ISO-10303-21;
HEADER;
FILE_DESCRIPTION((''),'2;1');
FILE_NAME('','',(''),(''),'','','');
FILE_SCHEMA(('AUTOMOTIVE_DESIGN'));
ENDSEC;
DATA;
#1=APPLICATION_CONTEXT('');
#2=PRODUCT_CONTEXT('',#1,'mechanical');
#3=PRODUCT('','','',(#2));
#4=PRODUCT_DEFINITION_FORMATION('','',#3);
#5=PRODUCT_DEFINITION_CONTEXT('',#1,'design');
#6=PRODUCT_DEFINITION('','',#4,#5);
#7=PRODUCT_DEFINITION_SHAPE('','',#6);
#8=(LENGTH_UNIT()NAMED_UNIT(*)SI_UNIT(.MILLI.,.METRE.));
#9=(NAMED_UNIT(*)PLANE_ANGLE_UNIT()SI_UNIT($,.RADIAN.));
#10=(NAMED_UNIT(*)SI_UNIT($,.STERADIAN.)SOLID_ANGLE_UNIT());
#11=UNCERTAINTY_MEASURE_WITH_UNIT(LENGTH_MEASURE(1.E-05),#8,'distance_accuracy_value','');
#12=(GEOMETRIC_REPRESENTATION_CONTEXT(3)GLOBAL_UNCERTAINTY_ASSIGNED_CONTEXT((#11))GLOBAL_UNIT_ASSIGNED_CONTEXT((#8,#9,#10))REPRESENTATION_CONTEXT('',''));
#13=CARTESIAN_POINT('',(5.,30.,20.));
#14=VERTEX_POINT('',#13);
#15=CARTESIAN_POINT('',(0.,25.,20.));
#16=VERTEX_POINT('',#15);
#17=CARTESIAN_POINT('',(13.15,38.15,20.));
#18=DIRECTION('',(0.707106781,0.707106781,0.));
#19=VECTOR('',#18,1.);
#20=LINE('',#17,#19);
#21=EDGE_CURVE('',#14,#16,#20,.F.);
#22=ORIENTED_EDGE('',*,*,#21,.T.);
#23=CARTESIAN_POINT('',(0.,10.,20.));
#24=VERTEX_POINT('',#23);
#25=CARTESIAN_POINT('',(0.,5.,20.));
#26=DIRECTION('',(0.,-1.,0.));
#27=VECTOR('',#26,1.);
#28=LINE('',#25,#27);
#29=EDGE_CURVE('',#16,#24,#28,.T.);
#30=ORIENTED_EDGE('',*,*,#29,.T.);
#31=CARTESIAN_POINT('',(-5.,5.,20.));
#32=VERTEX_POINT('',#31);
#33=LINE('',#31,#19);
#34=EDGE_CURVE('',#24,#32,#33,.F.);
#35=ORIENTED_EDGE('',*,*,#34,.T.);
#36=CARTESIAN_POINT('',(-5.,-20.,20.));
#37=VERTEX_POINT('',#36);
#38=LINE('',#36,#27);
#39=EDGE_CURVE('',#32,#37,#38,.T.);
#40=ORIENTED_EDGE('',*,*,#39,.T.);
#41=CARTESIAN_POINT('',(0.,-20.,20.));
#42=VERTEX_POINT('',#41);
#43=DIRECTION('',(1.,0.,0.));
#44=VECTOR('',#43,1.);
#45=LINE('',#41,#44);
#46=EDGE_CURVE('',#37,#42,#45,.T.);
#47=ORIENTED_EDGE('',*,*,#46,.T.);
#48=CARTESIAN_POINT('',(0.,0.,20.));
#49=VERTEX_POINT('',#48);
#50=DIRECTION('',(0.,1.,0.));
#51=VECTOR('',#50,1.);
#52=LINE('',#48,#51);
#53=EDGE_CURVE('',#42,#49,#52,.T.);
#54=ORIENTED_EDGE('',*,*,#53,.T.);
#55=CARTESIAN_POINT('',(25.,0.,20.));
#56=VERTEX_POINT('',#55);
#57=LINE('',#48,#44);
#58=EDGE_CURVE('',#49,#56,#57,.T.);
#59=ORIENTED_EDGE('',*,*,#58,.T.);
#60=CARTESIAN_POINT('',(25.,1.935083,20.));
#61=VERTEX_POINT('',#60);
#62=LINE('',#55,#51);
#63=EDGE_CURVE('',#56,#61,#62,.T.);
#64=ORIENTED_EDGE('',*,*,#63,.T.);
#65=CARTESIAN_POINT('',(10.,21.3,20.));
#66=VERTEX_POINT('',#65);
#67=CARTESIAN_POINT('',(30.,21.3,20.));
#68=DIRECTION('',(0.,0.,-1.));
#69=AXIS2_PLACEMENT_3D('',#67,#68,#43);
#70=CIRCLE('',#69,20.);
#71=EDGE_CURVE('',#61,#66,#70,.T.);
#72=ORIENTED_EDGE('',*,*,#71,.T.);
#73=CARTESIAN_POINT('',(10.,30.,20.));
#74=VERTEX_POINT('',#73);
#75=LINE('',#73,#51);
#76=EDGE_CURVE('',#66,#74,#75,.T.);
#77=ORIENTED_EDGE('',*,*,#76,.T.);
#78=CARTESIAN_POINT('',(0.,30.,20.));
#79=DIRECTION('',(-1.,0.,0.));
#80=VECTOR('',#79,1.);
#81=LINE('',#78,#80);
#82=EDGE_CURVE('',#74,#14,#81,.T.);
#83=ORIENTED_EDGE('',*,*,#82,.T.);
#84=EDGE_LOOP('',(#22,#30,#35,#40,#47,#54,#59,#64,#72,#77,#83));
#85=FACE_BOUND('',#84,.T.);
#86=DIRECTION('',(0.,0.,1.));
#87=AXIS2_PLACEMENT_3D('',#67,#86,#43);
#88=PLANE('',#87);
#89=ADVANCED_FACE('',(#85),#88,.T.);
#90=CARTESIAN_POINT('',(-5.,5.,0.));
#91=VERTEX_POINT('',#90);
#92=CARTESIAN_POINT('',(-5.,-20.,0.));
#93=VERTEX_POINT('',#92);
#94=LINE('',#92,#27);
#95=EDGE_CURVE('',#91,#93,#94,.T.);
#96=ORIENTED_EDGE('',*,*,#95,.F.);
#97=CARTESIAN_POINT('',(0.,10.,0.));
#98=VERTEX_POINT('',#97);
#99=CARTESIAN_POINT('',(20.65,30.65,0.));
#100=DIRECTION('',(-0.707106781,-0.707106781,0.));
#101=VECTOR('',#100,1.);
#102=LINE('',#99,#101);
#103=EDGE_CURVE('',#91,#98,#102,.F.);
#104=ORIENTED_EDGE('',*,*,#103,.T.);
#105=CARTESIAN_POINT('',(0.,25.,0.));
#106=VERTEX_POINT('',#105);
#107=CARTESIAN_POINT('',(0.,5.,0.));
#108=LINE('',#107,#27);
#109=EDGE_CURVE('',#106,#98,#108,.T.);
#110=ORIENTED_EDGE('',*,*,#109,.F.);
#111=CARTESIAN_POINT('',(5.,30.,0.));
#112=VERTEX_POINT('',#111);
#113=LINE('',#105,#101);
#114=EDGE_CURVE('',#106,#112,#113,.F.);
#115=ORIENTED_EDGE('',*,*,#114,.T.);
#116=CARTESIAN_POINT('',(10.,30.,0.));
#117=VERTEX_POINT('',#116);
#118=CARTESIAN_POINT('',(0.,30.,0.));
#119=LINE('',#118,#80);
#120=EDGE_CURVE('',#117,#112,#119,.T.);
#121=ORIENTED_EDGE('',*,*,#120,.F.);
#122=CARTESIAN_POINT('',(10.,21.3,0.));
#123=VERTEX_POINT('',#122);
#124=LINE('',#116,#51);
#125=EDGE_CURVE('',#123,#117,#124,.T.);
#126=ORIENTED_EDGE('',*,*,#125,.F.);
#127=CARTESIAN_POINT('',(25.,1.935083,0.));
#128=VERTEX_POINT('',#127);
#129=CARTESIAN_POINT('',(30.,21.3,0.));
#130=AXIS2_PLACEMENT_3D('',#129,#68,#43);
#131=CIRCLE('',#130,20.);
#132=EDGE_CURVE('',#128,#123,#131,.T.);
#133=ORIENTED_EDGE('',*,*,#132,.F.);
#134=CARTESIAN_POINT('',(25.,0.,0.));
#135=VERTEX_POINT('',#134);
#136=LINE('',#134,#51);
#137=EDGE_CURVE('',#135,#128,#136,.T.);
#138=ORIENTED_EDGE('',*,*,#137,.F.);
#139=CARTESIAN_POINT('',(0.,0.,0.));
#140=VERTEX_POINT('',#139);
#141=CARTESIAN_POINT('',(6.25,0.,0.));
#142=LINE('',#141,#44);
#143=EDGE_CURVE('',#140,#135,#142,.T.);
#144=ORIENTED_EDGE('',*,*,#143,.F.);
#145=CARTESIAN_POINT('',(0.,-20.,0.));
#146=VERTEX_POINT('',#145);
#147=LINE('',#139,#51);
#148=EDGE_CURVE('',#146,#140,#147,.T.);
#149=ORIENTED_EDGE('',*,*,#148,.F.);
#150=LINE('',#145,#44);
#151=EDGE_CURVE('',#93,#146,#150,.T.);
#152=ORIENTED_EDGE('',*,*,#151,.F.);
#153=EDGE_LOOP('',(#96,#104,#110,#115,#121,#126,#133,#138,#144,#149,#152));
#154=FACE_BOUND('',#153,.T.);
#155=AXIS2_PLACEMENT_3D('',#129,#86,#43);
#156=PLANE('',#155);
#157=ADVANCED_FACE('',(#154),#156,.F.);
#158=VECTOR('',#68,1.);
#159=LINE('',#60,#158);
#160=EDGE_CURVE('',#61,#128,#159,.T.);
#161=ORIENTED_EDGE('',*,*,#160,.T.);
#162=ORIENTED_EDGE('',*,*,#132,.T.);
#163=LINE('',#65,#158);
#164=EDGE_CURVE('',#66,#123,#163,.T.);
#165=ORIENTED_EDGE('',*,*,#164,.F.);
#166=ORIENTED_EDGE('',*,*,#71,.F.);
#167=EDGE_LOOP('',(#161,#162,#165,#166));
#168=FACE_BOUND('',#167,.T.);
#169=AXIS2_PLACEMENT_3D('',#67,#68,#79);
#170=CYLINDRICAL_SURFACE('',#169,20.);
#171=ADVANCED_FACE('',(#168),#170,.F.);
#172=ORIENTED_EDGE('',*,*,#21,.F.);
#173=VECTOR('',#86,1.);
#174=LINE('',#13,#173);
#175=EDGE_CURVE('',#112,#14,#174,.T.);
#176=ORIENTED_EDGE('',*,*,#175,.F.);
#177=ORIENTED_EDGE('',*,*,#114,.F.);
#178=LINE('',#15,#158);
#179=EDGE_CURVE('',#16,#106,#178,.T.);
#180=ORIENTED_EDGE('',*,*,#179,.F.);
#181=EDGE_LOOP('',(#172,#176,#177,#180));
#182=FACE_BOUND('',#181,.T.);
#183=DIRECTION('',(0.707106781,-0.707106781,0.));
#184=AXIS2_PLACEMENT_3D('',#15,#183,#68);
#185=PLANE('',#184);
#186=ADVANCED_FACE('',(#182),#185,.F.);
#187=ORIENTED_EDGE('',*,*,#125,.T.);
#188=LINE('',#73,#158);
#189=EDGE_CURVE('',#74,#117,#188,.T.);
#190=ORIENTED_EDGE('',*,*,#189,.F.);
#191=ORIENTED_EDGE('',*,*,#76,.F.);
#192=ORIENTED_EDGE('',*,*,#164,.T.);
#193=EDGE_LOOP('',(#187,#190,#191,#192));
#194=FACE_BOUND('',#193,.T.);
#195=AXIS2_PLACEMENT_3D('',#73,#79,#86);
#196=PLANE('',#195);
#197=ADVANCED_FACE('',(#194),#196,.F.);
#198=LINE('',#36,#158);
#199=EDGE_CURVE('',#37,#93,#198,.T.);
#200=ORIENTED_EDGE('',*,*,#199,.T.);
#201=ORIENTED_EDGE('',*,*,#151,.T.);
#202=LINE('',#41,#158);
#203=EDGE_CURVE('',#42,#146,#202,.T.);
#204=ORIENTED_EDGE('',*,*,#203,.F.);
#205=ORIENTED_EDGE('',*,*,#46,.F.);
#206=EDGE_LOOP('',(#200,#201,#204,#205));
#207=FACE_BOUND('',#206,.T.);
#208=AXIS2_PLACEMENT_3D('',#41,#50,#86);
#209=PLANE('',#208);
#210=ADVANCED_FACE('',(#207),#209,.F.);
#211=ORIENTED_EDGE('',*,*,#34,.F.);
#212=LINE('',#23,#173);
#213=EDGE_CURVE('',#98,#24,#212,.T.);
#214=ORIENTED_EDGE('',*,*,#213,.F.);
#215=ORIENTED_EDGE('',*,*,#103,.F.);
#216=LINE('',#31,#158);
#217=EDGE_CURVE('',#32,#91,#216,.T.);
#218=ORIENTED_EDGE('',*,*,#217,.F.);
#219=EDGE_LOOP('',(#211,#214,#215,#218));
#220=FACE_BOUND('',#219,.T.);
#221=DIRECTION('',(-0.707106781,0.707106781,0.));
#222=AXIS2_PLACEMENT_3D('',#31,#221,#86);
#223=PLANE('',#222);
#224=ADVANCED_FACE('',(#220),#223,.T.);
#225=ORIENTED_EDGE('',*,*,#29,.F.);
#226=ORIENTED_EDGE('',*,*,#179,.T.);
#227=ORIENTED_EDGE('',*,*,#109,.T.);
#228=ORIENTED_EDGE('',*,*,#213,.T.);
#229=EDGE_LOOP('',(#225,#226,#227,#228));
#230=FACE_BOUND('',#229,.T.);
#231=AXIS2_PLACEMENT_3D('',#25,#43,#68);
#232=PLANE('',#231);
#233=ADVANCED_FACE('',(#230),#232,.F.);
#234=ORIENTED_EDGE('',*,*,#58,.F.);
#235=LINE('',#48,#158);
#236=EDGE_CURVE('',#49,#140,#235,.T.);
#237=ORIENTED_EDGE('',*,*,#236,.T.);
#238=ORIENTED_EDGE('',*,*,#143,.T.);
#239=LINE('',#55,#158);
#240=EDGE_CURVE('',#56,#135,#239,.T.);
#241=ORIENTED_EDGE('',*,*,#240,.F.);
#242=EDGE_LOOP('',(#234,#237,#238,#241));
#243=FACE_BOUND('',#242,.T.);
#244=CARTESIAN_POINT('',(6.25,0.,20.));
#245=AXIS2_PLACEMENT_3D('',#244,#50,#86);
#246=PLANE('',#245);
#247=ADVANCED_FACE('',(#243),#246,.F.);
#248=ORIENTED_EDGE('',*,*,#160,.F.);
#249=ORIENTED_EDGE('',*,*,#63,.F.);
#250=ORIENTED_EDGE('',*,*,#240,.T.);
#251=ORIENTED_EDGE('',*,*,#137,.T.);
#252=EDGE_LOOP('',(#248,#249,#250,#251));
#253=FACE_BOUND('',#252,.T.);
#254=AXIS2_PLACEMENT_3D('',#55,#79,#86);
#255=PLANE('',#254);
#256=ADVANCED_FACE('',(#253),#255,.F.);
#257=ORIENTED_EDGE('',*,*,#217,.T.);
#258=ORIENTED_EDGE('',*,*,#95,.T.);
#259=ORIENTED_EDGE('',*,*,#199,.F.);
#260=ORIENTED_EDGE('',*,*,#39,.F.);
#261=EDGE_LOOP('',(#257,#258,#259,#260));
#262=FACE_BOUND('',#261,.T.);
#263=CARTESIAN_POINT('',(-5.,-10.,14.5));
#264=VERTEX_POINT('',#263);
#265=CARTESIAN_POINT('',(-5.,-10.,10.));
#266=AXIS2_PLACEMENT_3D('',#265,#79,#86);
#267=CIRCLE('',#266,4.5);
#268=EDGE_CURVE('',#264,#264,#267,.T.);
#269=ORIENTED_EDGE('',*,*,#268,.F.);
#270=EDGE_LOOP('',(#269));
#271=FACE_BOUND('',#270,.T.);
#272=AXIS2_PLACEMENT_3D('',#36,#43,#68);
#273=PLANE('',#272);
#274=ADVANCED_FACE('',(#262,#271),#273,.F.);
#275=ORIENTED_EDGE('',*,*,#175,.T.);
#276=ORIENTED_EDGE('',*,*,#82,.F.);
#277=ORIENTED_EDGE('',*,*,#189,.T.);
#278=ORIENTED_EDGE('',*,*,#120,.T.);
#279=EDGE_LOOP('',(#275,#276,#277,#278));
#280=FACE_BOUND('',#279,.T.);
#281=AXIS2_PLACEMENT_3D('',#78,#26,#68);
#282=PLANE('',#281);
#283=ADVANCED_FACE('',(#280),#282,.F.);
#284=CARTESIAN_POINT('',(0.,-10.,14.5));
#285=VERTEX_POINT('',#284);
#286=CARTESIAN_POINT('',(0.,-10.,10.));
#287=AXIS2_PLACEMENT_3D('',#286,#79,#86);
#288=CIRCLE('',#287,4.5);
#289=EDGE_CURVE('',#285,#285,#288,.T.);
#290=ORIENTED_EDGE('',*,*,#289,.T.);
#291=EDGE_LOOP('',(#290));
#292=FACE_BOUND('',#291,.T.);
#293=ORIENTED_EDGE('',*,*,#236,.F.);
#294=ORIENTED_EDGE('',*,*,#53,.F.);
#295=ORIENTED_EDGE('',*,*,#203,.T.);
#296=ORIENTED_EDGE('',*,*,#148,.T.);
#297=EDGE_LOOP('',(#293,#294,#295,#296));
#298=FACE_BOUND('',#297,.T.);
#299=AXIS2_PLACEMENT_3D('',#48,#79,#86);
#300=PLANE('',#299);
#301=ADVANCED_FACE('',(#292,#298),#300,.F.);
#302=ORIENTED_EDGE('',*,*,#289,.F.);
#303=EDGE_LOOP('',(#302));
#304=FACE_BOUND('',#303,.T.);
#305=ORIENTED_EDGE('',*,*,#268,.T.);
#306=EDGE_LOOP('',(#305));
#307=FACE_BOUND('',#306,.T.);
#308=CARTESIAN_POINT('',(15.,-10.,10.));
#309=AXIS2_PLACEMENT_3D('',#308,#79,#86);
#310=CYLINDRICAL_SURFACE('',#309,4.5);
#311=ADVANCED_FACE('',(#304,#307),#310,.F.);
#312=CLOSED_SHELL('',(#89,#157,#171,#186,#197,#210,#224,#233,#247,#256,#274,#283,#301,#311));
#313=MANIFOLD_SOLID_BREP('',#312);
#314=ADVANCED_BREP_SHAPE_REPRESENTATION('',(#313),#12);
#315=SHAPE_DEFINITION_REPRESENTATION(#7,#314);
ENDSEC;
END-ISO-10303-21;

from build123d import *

# Parameters (mm, degrees)
EXTRUDE_1_DEPTH     = 20
SKETCH_3_R          = 4.5
CUT_EXTRUDE_2_DEPTH = 20
CHAMFER_1_SIZE      = 5
CHAMFER_2_SIZE      = 5


with BuildPart() as part:
    # 草图1 → 凸台-拉伸1 (new body)
    with BuildSketch(Plane.XY):
        with BuildLine():
            Line((0, 5), (0, 30))
            Line((0, 30), (10, 30))
            Line((10, 30), (10, 21.3))
            ThreePointArc((10, 21.3), (14.188611699, 9.052551286), (25, 1.935083269))
            Line((25, 1.935083269), (25, 0))
            Line((25, 0), (6.25, 0))
            Line((6.25, 0), (0, 0))
            Line((0, 0), (0, -20))
            Line((0, -20), (-5, -20))
            Line((-5, -20), (-5, 5))
            Line((-5, 5), (0, 5))
        make_face()
    extrude(amount=EXTRUDE_1_DEPTH)

    # 草图3 → 切除-拉伸2 (cut)
    with BuildSketch(Plane.ZY.offset(5)):
        with Locations((10, -10)):
            Circle(SKETCH_3_R)
    extrude(amount=-CUT_EXTRUDE_2_DEPTH, mode=Mode.SUBTRACT)

    # 倒角1
    chamfer_1_edges = [part.edges().sort_by_distance(p)[0] for p in [
        (0, 5, 10),
    ]]
    chamfer(chamfer_1_edges, length=CHAMFER_1_SIZE - 0.0001)  # a hair under: the kernel refuses the full size

    # 倒角2
    chamfer_2_edges = [part.edges().sort_by_distance(p)[0] for p in [
        (0, 30, 10),
    ]]
    chamfer(chamfer_2_edges, length=CHAMFER_2_SIZE)


solid = part.part
